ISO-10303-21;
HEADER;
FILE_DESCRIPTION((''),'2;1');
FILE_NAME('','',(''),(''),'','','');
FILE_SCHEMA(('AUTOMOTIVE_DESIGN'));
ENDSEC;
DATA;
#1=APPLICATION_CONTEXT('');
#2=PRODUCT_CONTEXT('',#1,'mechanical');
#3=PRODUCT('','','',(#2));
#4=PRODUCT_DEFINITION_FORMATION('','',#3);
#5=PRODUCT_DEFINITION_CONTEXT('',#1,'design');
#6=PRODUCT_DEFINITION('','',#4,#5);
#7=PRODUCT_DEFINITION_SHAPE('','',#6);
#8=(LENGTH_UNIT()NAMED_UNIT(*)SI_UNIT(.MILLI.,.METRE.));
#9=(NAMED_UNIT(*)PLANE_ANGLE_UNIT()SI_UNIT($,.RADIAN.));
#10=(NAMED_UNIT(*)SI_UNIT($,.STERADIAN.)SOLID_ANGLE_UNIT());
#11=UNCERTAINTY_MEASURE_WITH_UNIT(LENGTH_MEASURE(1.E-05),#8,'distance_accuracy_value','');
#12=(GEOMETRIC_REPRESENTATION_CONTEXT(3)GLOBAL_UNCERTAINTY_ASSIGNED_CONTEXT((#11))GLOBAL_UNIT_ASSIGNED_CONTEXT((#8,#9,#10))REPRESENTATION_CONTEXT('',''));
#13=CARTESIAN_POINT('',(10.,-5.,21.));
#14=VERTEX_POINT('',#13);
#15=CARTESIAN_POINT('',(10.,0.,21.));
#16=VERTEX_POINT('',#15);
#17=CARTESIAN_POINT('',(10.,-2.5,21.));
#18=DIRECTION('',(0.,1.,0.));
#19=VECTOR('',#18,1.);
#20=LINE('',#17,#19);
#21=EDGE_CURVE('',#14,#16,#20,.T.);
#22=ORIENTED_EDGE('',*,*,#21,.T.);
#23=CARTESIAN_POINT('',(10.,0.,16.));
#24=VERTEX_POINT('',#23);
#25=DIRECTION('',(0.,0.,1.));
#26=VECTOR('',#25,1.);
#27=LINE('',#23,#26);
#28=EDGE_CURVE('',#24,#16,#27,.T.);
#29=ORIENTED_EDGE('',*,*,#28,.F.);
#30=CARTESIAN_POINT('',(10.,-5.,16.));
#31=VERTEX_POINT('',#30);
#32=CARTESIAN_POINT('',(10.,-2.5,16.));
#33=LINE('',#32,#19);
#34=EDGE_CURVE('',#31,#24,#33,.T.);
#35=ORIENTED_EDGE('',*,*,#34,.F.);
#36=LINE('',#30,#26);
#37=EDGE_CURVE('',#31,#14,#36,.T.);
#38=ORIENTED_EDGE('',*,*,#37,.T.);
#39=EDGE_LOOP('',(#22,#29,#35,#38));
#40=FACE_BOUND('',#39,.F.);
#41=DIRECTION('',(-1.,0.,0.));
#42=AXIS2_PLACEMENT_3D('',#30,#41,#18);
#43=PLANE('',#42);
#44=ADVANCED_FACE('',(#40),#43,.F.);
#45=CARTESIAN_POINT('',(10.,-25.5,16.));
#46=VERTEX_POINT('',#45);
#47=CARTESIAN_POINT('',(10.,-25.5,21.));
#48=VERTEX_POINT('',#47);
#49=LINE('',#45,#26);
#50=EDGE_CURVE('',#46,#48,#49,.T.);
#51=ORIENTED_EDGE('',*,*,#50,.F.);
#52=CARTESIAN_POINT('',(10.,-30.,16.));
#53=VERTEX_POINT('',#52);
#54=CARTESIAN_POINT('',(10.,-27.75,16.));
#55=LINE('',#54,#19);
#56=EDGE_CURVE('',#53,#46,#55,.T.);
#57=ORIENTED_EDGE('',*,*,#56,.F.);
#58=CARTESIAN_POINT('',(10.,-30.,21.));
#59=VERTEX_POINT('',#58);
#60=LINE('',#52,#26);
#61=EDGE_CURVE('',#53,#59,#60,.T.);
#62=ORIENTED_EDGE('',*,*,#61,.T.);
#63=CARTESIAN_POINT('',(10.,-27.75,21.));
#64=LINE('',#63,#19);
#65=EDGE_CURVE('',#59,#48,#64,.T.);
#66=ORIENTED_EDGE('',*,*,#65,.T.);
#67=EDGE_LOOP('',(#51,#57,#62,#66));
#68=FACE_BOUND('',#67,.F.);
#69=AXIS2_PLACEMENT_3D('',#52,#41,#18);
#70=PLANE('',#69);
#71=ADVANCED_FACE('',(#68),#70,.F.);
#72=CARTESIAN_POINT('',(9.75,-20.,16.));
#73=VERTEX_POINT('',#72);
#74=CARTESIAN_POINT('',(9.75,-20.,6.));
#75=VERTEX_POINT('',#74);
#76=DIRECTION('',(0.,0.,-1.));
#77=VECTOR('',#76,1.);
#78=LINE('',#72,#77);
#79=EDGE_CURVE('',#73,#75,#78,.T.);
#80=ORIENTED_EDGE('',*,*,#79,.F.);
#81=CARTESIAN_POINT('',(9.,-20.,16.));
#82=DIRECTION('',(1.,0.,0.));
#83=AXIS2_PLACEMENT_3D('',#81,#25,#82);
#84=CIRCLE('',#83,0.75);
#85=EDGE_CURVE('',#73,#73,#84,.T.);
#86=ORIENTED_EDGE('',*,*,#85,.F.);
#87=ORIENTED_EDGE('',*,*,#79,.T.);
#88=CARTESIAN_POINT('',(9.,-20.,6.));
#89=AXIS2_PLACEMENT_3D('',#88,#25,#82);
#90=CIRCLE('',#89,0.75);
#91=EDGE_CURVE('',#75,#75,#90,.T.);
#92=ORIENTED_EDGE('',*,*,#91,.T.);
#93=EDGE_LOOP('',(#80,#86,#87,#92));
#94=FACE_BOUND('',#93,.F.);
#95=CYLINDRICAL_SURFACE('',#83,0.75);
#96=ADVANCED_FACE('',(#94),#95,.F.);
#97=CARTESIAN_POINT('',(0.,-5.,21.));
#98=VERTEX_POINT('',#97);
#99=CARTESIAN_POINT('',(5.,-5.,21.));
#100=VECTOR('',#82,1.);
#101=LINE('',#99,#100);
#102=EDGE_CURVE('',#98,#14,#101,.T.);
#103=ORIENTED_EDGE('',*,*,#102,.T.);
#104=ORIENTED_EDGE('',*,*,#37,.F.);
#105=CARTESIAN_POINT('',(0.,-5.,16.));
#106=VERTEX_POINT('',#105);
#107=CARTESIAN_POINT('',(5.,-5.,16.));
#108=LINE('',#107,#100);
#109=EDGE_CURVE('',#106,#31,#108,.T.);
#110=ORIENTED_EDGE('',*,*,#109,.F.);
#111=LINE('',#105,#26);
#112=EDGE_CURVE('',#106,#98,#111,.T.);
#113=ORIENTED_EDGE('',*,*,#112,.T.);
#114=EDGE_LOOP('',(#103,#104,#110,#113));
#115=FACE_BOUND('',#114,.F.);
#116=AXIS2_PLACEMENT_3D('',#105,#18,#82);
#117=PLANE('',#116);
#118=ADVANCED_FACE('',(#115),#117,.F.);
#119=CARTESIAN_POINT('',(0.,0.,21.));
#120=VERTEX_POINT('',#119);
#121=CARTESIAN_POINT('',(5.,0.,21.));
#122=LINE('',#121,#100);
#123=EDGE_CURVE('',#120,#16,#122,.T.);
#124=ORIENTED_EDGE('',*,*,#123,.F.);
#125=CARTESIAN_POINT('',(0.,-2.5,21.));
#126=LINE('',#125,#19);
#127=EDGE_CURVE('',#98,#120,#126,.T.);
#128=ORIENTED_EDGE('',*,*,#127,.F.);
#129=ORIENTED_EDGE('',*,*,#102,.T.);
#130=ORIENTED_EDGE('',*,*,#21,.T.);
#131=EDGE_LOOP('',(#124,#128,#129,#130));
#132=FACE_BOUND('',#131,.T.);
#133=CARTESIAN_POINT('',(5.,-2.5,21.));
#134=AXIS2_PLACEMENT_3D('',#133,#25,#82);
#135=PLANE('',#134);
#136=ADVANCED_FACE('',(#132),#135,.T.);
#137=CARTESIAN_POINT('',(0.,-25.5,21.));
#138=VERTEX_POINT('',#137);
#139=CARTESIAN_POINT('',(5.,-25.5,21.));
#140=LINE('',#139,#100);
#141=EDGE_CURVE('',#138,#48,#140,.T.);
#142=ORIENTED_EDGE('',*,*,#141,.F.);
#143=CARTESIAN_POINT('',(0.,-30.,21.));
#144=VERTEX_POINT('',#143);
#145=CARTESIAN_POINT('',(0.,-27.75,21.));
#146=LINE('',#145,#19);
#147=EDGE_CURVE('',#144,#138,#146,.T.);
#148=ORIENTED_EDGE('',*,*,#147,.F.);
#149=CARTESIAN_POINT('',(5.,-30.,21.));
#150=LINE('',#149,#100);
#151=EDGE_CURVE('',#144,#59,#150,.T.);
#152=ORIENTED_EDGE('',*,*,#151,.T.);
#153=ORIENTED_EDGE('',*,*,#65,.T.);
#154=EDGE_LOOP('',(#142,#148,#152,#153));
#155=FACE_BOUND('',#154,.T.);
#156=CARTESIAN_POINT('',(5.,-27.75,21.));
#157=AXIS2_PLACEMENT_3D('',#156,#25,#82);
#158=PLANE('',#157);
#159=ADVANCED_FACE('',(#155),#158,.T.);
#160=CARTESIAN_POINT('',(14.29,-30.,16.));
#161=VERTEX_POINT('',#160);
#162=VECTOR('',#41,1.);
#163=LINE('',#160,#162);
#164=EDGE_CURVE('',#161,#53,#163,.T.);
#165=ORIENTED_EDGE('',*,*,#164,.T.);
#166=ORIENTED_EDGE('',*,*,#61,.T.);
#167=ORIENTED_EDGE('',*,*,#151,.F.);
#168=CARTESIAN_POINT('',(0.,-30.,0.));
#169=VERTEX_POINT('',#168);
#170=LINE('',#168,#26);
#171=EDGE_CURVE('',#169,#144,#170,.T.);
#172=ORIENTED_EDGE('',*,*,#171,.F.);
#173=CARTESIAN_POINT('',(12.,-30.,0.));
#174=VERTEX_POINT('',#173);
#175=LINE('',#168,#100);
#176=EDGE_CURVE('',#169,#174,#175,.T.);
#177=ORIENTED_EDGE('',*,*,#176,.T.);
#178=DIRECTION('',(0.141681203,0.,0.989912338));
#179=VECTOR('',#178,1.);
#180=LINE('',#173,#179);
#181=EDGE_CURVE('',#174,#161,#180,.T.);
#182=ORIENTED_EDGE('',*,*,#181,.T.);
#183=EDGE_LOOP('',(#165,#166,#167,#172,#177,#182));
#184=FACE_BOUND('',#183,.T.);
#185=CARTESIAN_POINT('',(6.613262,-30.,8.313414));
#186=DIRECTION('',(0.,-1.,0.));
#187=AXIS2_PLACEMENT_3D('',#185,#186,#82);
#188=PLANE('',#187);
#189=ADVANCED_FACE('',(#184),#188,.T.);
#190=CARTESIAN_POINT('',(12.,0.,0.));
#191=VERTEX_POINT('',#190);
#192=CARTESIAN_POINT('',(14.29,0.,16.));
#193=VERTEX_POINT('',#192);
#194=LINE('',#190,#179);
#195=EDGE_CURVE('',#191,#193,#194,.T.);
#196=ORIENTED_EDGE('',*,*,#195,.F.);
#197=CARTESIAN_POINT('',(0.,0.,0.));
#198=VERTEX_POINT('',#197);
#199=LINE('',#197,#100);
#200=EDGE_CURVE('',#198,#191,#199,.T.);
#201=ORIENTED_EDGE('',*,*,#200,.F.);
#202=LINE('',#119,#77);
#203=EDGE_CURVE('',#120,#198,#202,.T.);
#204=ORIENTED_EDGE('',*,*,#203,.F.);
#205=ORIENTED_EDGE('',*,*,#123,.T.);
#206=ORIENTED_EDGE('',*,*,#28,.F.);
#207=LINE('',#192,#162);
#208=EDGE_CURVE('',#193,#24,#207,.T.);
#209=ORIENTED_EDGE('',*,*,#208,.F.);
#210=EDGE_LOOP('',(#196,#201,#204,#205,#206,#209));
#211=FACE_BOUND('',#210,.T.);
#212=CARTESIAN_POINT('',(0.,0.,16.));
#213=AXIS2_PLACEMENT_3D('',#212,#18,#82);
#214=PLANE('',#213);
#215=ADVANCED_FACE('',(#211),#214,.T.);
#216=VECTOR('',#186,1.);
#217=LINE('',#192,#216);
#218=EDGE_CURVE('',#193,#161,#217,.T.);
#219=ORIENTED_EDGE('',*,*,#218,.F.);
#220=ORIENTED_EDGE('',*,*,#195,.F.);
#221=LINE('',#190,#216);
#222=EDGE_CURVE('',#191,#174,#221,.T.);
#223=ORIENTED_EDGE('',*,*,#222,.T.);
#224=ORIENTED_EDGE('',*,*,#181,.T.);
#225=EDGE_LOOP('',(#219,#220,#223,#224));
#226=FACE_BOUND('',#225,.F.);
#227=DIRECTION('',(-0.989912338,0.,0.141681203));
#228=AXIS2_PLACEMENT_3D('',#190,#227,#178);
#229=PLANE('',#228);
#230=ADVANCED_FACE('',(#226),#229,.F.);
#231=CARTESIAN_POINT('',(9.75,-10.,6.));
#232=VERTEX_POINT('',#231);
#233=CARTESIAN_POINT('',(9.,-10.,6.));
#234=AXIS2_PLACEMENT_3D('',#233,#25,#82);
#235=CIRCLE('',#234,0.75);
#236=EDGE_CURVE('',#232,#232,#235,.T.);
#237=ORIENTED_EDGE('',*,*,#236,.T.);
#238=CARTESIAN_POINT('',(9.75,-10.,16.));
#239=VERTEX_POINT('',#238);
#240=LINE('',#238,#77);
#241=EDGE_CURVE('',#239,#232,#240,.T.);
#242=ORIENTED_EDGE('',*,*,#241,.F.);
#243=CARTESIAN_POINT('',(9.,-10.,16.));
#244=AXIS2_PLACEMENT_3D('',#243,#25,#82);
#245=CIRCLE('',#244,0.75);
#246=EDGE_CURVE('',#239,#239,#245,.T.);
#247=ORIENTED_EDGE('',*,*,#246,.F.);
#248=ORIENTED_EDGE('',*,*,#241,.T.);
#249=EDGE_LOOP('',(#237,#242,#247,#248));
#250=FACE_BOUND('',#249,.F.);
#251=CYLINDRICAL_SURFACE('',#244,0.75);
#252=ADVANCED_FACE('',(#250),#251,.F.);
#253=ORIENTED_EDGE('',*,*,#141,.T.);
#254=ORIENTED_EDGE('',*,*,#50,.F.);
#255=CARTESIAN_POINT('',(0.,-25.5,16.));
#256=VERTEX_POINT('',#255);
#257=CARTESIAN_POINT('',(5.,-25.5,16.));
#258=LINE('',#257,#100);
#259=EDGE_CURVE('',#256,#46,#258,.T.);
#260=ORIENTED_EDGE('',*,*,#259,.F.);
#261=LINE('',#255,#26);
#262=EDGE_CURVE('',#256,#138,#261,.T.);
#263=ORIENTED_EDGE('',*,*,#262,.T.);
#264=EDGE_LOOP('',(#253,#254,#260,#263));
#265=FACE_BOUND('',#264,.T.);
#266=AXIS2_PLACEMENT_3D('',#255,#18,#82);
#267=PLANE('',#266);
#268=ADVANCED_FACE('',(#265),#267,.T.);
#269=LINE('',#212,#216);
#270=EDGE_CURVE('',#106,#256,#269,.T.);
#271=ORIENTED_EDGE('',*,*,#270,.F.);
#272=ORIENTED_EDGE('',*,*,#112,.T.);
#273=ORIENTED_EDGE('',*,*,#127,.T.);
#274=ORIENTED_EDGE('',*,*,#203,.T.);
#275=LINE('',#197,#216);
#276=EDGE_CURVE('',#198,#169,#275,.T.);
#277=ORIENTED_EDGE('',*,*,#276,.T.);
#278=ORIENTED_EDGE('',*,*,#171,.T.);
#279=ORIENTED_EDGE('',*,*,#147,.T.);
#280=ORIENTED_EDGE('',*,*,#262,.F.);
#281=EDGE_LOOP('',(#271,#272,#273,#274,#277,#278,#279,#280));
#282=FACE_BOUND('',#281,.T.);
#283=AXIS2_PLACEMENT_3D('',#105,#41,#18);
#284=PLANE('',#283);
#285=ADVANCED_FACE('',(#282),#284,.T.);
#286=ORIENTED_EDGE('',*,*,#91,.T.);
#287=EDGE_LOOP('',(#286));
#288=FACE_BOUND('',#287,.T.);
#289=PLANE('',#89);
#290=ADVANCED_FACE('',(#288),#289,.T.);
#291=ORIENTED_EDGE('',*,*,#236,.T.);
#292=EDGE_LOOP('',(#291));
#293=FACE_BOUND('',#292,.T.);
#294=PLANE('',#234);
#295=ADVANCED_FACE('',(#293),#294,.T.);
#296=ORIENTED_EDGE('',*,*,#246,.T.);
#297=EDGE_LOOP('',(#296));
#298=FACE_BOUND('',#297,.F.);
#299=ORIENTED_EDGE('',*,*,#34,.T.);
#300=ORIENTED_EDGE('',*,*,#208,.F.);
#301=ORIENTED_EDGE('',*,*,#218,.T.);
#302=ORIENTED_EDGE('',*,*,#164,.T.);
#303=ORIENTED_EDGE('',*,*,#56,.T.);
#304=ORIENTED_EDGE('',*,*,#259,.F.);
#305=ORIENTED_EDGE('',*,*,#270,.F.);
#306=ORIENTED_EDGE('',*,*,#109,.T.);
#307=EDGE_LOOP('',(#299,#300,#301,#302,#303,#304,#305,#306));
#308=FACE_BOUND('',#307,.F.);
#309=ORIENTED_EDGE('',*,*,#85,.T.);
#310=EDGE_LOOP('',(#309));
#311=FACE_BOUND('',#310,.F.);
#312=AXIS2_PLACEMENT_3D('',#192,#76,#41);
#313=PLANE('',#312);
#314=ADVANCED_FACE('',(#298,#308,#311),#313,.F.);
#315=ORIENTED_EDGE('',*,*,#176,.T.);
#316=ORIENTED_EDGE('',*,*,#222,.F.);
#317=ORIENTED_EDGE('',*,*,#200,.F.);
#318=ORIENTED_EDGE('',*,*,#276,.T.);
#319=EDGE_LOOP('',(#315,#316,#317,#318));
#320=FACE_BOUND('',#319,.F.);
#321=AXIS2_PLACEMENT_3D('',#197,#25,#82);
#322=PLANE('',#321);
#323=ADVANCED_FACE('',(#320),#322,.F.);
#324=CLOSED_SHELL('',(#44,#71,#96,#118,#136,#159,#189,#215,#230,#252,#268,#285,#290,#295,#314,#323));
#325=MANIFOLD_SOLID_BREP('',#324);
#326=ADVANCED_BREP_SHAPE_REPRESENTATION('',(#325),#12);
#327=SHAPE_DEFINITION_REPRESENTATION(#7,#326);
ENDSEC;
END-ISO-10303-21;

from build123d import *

# Parameters (mm, degrees)
F1_DEPTH = 30
F2_R     = 0.75
F3_DEPTH = 10
F4_W     = 10
F4_H     = 5
F4_H_2   = 4.5
F5_DEPTH = 5


# Not quite as in the source:
# - a feature names something its author has since deleted; it is built from what else it names


with BuildPart() as f1:
    # F0 (on Front) → F1 (new body)
    with BuildSketch(Plane.XZ):
        Polygon((0, 16), (0, 0), (12, 0), (14.29, 16), align=None)
    extrude(amount=F1_DEPTH)

    # F2 (on face) → F3 (cut)
    with BuildSketch(Plane.XY.offset(16)):
        with Locations((9, -10)):
            Circle(F2_R)
        with Locations((9, -20)):
            Circle(F2_R)
    extrude(amount=-F3_DEPTH, mode=Mode.SUBTRACT)

    # F4 (on face) → F5 (join)
    with BuildSketch(Plane.XY.offset(16)):
        with Locations((5, -2.5)):
            Rectangle(F4_W, F4_H)
        with Locations((5, -27.75)):
            Rectangle(F4_W, F4_H_2)
    extrude(amount=F5_DEPTH)


solid = f1.part
